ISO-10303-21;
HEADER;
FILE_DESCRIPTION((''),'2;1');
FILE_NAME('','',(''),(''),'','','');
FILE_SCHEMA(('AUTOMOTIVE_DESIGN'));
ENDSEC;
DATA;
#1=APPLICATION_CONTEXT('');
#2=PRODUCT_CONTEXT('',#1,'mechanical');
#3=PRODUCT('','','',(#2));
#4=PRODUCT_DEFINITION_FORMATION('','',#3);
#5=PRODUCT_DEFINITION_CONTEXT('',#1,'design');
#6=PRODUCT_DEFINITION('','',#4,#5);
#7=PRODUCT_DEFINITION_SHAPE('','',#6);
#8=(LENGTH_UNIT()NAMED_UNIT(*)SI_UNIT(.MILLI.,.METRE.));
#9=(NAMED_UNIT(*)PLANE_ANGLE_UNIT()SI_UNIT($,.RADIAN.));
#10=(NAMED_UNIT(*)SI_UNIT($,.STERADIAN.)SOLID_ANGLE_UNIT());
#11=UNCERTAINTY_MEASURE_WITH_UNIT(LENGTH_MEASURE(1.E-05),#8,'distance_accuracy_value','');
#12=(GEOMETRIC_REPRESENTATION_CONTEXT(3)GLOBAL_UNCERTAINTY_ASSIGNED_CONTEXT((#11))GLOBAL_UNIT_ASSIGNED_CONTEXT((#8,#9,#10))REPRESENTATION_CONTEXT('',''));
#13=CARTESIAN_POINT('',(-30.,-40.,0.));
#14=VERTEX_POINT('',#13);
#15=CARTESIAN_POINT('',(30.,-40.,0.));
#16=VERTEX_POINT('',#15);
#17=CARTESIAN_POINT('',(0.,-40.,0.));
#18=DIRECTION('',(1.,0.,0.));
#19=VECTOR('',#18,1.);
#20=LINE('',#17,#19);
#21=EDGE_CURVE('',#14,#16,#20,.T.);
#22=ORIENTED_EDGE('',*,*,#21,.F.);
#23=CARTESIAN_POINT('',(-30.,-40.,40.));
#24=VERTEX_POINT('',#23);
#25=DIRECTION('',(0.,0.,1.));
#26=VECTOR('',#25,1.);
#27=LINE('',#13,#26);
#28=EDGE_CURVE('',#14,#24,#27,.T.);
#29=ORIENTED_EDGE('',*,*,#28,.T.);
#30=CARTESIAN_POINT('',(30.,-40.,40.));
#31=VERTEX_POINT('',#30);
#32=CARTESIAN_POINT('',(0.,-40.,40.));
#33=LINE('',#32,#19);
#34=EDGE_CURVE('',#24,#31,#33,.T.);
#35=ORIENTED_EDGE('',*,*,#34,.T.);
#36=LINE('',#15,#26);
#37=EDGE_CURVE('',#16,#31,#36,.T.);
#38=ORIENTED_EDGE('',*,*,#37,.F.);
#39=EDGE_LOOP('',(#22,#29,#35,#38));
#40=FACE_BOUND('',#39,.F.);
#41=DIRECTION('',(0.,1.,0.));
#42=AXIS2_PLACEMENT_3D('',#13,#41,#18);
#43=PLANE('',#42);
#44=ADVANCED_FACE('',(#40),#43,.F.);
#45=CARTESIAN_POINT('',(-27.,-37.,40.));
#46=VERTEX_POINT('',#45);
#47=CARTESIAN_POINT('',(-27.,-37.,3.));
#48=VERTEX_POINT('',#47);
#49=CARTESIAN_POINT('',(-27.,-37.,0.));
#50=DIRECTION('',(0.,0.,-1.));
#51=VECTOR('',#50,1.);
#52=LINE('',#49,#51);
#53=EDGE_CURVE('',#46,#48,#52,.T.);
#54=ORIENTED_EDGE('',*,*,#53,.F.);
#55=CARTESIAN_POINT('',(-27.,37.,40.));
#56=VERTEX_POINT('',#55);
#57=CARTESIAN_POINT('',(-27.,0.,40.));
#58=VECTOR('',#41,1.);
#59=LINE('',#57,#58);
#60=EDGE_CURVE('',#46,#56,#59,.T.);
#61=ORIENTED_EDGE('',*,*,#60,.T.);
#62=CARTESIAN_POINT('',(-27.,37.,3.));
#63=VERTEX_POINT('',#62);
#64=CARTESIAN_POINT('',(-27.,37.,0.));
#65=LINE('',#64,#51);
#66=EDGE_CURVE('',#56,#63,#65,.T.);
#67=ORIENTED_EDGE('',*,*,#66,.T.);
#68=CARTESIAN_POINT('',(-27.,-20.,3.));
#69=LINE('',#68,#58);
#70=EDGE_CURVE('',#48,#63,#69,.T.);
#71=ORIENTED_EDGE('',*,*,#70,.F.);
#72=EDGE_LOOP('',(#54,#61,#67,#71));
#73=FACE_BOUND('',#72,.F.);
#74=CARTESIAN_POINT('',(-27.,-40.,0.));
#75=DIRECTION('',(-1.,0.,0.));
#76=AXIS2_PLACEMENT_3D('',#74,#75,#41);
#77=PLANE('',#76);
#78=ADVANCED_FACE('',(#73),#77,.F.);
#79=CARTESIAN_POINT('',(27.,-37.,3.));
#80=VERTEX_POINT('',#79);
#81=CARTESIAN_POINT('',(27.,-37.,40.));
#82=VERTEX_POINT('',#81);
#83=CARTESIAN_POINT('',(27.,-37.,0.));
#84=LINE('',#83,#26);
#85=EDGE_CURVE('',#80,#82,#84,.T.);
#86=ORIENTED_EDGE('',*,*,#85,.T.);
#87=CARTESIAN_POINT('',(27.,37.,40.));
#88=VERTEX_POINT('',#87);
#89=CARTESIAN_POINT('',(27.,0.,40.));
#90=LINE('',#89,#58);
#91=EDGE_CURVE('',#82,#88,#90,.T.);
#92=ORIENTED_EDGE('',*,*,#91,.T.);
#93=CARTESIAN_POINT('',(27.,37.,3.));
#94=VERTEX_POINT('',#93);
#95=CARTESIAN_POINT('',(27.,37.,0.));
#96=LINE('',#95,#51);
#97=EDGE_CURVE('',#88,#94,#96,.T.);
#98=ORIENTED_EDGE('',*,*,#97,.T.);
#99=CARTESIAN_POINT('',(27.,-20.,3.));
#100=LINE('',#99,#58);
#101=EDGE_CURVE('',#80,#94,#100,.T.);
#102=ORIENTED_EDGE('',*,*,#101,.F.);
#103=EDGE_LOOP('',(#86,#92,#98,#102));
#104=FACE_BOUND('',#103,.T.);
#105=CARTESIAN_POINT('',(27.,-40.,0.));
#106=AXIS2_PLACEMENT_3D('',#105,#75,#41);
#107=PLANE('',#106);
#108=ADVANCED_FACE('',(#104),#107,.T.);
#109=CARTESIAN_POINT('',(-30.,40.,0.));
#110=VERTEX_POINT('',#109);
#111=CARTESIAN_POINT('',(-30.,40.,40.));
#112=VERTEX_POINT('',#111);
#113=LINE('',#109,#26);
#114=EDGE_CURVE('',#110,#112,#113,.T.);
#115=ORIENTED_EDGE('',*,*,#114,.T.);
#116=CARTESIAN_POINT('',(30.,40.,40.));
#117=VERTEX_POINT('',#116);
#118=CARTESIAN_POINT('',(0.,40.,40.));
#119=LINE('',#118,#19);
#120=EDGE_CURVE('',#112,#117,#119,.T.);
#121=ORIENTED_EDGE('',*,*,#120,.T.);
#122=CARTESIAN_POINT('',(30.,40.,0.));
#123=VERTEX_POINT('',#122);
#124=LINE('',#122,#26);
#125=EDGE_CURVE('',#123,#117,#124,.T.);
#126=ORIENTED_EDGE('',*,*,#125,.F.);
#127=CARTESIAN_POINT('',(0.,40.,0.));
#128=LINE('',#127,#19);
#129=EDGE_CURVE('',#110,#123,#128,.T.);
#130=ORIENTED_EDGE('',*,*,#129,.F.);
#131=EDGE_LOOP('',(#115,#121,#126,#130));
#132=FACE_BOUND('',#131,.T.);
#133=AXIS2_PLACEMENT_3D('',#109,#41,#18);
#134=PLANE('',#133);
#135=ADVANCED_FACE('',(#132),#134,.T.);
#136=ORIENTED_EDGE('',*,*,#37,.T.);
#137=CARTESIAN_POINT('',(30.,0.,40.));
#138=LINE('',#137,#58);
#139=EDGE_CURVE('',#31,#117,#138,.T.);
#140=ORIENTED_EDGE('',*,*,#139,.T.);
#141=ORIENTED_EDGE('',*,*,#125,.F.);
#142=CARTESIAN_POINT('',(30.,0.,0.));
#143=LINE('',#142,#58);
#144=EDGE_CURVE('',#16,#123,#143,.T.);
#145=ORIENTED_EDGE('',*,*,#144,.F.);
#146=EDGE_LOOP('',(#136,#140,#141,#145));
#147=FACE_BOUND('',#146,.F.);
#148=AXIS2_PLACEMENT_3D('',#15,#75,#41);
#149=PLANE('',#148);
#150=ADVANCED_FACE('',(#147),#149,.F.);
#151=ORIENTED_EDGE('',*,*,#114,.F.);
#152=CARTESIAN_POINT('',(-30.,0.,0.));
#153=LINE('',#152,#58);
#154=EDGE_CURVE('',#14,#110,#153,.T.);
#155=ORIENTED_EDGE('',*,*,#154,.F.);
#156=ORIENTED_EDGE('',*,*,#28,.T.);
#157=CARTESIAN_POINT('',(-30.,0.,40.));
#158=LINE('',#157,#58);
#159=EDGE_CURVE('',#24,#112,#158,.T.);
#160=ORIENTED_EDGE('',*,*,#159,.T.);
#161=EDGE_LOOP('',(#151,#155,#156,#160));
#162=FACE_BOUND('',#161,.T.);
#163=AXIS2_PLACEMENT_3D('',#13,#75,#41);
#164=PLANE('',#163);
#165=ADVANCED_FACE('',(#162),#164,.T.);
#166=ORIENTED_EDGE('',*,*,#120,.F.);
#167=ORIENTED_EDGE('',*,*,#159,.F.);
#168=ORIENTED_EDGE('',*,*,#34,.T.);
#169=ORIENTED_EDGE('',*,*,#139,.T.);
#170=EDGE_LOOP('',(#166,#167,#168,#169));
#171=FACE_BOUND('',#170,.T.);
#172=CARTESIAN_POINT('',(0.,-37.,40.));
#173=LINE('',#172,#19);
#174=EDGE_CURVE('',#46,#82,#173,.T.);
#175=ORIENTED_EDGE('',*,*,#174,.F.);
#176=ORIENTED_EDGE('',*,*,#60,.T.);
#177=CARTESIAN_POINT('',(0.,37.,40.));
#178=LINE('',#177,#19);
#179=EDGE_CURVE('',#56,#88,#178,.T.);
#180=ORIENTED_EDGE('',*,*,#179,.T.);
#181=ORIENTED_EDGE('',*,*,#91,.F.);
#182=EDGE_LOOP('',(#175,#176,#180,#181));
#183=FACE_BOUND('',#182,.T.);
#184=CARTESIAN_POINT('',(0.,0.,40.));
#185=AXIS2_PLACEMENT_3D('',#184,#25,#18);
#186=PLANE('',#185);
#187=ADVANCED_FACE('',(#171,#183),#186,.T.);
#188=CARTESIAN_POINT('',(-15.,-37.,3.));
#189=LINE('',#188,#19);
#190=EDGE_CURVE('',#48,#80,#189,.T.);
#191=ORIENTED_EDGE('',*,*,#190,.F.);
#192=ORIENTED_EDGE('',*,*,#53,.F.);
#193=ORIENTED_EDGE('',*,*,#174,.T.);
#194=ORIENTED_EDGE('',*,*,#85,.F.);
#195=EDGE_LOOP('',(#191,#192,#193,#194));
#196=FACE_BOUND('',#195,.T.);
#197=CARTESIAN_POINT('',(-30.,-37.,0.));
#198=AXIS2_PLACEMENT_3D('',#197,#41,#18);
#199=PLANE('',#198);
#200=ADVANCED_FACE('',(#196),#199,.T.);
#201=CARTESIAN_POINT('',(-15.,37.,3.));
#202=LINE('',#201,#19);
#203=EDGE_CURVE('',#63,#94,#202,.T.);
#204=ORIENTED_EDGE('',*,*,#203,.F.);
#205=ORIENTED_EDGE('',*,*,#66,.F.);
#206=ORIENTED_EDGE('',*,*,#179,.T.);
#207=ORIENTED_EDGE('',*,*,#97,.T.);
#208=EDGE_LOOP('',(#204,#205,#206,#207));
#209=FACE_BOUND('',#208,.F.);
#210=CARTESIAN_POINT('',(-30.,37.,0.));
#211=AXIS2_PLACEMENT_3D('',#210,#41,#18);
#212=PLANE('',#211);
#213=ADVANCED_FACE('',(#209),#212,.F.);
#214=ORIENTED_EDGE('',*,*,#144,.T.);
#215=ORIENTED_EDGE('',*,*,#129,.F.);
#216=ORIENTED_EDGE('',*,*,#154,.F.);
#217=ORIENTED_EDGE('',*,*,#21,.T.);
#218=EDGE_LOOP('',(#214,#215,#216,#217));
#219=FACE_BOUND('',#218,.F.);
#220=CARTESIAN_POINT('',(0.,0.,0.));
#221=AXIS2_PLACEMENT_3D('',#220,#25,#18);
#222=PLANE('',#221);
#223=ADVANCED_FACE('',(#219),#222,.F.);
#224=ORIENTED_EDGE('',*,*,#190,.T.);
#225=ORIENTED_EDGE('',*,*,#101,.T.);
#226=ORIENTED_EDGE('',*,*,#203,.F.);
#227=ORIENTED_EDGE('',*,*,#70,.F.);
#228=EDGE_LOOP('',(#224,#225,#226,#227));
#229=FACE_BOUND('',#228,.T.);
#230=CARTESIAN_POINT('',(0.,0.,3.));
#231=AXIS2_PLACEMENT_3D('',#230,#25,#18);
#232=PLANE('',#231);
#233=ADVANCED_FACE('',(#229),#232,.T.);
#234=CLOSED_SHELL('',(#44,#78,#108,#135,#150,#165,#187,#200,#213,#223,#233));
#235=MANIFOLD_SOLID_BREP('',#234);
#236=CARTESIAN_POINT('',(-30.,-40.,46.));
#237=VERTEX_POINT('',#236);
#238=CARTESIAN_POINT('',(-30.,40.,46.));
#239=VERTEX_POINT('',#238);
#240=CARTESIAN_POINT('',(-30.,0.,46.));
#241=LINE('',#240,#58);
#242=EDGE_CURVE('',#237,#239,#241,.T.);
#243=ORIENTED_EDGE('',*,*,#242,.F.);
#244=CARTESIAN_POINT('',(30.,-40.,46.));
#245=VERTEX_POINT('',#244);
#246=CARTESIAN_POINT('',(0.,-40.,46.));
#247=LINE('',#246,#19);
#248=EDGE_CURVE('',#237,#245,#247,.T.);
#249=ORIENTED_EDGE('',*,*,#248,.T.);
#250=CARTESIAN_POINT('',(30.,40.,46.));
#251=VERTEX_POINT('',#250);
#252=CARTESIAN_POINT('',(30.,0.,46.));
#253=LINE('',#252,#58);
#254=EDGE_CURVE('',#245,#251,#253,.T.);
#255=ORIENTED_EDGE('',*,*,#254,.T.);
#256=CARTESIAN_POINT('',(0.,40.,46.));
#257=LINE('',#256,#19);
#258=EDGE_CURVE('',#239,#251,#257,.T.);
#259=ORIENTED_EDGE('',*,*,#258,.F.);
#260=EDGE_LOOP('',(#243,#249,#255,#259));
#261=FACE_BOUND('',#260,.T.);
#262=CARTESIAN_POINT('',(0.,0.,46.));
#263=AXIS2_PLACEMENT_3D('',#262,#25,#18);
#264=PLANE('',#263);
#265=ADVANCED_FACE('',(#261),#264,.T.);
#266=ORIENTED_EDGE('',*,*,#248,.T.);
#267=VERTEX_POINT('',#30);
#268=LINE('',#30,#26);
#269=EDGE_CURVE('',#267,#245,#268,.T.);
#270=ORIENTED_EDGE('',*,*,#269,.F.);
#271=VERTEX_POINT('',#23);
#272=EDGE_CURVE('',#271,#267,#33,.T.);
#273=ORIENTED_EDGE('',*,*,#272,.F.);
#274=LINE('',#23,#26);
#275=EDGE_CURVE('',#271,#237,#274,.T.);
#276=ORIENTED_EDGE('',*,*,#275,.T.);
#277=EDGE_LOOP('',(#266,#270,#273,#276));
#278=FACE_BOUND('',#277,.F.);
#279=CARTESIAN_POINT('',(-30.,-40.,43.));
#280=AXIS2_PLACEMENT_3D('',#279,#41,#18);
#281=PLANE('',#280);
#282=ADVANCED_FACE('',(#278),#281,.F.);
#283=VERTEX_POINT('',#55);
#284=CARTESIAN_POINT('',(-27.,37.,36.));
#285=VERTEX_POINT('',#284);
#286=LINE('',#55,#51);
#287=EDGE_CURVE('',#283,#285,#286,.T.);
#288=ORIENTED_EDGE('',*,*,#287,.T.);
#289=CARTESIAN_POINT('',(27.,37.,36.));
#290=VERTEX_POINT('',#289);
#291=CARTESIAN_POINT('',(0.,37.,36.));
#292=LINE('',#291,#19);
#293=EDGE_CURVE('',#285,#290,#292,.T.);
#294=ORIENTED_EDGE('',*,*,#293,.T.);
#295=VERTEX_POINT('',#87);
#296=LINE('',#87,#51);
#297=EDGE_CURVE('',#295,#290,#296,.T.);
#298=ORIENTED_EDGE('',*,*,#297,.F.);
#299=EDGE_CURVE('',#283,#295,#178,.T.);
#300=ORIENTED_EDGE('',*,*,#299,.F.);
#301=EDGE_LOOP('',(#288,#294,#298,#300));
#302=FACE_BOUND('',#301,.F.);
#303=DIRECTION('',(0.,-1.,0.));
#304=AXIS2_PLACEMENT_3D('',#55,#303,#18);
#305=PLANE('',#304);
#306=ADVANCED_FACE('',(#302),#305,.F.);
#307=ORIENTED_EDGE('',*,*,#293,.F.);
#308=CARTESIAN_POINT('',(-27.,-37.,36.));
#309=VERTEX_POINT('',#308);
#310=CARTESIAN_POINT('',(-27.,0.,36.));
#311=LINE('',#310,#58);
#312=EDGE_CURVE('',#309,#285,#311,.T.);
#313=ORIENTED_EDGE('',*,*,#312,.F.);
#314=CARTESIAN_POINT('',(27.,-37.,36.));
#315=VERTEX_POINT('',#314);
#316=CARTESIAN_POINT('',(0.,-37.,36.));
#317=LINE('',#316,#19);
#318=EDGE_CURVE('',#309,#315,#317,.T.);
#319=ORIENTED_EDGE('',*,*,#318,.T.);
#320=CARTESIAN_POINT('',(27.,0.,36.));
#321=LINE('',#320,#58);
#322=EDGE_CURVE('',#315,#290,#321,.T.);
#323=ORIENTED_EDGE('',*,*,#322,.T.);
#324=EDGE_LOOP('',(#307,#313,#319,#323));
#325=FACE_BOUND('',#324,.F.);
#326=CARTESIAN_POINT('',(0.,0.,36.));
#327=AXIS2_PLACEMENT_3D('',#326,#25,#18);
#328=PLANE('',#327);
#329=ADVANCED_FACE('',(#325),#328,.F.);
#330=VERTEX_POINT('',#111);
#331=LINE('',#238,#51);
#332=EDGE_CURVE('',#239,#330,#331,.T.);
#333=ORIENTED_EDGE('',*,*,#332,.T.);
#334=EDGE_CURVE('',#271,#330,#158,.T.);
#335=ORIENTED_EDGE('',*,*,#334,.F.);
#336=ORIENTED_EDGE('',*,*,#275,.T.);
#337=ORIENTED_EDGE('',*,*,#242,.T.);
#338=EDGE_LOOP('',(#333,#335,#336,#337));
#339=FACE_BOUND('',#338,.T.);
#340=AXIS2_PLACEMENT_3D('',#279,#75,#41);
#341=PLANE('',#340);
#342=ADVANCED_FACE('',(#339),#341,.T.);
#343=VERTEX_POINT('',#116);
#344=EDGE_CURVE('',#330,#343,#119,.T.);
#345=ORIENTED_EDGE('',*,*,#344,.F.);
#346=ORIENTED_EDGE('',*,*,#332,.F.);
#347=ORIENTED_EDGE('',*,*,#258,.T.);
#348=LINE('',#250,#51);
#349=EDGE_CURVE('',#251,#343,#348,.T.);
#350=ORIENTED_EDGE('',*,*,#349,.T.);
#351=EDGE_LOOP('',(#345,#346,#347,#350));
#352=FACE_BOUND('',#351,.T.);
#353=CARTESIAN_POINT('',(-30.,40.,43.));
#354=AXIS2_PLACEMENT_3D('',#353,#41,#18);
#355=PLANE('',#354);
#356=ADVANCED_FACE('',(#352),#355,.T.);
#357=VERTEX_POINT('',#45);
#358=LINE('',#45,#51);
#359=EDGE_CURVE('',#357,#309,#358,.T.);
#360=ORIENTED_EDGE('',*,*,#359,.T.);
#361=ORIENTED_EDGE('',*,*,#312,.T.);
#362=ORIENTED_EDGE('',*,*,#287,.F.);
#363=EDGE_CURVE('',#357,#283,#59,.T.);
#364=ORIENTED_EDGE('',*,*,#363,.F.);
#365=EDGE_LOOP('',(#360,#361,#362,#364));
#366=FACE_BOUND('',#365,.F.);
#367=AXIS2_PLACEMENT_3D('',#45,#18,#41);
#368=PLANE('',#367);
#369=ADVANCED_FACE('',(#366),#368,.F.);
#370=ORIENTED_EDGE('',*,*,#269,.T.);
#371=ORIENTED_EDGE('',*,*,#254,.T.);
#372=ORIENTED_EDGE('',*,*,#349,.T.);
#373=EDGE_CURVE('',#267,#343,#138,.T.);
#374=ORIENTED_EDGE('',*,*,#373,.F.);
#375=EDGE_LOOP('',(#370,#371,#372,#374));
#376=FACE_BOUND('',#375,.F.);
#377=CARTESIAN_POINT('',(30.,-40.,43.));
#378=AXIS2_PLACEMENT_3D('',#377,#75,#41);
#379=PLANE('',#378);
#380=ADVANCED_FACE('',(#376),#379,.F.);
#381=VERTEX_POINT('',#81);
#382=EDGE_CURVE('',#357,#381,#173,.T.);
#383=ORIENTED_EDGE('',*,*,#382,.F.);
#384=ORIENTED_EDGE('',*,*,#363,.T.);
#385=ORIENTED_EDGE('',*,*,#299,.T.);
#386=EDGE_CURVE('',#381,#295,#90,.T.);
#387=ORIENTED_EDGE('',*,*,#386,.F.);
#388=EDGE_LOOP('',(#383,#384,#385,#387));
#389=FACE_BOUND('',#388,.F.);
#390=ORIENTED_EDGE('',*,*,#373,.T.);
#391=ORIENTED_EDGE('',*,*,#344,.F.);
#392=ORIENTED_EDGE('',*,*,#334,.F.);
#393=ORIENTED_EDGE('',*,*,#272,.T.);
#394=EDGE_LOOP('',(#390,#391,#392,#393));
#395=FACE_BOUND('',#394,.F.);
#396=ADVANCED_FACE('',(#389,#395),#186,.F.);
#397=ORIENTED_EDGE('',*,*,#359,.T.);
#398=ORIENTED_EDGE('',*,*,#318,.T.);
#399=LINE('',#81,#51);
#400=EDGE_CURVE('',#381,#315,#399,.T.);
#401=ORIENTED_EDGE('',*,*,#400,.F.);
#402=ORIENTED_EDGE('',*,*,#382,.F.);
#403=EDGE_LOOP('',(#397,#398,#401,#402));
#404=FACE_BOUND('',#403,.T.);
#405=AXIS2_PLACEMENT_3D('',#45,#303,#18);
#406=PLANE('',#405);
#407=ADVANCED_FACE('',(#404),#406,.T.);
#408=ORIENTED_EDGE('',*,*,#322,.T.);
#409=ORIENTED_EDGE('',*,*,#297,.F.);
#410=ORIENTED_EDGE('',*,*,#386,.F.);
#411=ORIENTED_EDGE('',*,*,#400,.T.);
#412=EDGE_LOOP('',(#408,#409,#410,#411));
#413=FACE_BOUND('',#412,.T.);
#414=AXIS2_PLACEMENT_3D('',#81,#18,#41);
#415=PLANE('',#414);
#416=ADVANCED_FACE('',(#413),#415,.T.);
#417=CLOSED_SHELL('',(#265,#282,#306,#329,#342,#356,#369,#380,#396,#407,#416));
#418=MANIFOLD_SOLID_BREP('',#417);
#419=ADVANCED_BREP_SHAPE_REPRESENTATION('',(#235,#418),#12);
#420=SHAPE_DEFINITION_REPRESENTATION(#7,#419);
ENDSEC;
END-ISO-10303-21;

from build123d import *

# Parameters (mm, degrees)
F0_W     = 60
F0_H     = 80
F1_DEPTH = 40
F2_T     = -3
F3_W     = 60
F3_H     = 80
F3_W_2   = 54
F3_H_2   = 74
F4_DEPTH = 3
F5_DEPTH = 3
F6_DEPTH = 4


# Not quite as in the source:
# - the program builds the solid bodies; features that only make, move or delete a surface that nothing else refers to are left out


with BuildPart() as f1:
    # F0 (on Top) → F1 (new body)
    with BuildSketch(Plane.XY):
        Rectangle(F0_W, F0_H)
    extrude(amount=F1_DEPTH)

    # F2
    f2_openings = [f1.faces().sort_by_distance(p)[0] for p in [
        (0, 0, 40),
    ]]
    offset(amount=F2_T, openings=f2_openings)


with BuildPart() as f4:
    # F3 (on face) → F4 (new body)
    with BuildSketch(Plane.XY.offset(40)):
        Rectangle(F3_W, F3_H)
        Rectangle(F3_W_2, F3_H_2, mode=Mode.SUBTRACT)
        Rectangle(F3_W_2, F3_H_2)
    extrude(amount=F4_DEPTH)

    # F5 (add): a face of the model
    f5_faces = [f4.faces().sort_by_distance(p)[0] for p in [
        (0, 0, 43),
    ]]
    extrude(f5_faces, amount=F5_DEPTH)

    # F3 (on face) → F6 (join)
    with BuildSketch(Plane.XY.offset(40)):
        Rectangle(F3_W_2, F3_H_2)
    extrude(amount=-F6_DEPTH)


solid = Compound([f1.part, f4.part])
